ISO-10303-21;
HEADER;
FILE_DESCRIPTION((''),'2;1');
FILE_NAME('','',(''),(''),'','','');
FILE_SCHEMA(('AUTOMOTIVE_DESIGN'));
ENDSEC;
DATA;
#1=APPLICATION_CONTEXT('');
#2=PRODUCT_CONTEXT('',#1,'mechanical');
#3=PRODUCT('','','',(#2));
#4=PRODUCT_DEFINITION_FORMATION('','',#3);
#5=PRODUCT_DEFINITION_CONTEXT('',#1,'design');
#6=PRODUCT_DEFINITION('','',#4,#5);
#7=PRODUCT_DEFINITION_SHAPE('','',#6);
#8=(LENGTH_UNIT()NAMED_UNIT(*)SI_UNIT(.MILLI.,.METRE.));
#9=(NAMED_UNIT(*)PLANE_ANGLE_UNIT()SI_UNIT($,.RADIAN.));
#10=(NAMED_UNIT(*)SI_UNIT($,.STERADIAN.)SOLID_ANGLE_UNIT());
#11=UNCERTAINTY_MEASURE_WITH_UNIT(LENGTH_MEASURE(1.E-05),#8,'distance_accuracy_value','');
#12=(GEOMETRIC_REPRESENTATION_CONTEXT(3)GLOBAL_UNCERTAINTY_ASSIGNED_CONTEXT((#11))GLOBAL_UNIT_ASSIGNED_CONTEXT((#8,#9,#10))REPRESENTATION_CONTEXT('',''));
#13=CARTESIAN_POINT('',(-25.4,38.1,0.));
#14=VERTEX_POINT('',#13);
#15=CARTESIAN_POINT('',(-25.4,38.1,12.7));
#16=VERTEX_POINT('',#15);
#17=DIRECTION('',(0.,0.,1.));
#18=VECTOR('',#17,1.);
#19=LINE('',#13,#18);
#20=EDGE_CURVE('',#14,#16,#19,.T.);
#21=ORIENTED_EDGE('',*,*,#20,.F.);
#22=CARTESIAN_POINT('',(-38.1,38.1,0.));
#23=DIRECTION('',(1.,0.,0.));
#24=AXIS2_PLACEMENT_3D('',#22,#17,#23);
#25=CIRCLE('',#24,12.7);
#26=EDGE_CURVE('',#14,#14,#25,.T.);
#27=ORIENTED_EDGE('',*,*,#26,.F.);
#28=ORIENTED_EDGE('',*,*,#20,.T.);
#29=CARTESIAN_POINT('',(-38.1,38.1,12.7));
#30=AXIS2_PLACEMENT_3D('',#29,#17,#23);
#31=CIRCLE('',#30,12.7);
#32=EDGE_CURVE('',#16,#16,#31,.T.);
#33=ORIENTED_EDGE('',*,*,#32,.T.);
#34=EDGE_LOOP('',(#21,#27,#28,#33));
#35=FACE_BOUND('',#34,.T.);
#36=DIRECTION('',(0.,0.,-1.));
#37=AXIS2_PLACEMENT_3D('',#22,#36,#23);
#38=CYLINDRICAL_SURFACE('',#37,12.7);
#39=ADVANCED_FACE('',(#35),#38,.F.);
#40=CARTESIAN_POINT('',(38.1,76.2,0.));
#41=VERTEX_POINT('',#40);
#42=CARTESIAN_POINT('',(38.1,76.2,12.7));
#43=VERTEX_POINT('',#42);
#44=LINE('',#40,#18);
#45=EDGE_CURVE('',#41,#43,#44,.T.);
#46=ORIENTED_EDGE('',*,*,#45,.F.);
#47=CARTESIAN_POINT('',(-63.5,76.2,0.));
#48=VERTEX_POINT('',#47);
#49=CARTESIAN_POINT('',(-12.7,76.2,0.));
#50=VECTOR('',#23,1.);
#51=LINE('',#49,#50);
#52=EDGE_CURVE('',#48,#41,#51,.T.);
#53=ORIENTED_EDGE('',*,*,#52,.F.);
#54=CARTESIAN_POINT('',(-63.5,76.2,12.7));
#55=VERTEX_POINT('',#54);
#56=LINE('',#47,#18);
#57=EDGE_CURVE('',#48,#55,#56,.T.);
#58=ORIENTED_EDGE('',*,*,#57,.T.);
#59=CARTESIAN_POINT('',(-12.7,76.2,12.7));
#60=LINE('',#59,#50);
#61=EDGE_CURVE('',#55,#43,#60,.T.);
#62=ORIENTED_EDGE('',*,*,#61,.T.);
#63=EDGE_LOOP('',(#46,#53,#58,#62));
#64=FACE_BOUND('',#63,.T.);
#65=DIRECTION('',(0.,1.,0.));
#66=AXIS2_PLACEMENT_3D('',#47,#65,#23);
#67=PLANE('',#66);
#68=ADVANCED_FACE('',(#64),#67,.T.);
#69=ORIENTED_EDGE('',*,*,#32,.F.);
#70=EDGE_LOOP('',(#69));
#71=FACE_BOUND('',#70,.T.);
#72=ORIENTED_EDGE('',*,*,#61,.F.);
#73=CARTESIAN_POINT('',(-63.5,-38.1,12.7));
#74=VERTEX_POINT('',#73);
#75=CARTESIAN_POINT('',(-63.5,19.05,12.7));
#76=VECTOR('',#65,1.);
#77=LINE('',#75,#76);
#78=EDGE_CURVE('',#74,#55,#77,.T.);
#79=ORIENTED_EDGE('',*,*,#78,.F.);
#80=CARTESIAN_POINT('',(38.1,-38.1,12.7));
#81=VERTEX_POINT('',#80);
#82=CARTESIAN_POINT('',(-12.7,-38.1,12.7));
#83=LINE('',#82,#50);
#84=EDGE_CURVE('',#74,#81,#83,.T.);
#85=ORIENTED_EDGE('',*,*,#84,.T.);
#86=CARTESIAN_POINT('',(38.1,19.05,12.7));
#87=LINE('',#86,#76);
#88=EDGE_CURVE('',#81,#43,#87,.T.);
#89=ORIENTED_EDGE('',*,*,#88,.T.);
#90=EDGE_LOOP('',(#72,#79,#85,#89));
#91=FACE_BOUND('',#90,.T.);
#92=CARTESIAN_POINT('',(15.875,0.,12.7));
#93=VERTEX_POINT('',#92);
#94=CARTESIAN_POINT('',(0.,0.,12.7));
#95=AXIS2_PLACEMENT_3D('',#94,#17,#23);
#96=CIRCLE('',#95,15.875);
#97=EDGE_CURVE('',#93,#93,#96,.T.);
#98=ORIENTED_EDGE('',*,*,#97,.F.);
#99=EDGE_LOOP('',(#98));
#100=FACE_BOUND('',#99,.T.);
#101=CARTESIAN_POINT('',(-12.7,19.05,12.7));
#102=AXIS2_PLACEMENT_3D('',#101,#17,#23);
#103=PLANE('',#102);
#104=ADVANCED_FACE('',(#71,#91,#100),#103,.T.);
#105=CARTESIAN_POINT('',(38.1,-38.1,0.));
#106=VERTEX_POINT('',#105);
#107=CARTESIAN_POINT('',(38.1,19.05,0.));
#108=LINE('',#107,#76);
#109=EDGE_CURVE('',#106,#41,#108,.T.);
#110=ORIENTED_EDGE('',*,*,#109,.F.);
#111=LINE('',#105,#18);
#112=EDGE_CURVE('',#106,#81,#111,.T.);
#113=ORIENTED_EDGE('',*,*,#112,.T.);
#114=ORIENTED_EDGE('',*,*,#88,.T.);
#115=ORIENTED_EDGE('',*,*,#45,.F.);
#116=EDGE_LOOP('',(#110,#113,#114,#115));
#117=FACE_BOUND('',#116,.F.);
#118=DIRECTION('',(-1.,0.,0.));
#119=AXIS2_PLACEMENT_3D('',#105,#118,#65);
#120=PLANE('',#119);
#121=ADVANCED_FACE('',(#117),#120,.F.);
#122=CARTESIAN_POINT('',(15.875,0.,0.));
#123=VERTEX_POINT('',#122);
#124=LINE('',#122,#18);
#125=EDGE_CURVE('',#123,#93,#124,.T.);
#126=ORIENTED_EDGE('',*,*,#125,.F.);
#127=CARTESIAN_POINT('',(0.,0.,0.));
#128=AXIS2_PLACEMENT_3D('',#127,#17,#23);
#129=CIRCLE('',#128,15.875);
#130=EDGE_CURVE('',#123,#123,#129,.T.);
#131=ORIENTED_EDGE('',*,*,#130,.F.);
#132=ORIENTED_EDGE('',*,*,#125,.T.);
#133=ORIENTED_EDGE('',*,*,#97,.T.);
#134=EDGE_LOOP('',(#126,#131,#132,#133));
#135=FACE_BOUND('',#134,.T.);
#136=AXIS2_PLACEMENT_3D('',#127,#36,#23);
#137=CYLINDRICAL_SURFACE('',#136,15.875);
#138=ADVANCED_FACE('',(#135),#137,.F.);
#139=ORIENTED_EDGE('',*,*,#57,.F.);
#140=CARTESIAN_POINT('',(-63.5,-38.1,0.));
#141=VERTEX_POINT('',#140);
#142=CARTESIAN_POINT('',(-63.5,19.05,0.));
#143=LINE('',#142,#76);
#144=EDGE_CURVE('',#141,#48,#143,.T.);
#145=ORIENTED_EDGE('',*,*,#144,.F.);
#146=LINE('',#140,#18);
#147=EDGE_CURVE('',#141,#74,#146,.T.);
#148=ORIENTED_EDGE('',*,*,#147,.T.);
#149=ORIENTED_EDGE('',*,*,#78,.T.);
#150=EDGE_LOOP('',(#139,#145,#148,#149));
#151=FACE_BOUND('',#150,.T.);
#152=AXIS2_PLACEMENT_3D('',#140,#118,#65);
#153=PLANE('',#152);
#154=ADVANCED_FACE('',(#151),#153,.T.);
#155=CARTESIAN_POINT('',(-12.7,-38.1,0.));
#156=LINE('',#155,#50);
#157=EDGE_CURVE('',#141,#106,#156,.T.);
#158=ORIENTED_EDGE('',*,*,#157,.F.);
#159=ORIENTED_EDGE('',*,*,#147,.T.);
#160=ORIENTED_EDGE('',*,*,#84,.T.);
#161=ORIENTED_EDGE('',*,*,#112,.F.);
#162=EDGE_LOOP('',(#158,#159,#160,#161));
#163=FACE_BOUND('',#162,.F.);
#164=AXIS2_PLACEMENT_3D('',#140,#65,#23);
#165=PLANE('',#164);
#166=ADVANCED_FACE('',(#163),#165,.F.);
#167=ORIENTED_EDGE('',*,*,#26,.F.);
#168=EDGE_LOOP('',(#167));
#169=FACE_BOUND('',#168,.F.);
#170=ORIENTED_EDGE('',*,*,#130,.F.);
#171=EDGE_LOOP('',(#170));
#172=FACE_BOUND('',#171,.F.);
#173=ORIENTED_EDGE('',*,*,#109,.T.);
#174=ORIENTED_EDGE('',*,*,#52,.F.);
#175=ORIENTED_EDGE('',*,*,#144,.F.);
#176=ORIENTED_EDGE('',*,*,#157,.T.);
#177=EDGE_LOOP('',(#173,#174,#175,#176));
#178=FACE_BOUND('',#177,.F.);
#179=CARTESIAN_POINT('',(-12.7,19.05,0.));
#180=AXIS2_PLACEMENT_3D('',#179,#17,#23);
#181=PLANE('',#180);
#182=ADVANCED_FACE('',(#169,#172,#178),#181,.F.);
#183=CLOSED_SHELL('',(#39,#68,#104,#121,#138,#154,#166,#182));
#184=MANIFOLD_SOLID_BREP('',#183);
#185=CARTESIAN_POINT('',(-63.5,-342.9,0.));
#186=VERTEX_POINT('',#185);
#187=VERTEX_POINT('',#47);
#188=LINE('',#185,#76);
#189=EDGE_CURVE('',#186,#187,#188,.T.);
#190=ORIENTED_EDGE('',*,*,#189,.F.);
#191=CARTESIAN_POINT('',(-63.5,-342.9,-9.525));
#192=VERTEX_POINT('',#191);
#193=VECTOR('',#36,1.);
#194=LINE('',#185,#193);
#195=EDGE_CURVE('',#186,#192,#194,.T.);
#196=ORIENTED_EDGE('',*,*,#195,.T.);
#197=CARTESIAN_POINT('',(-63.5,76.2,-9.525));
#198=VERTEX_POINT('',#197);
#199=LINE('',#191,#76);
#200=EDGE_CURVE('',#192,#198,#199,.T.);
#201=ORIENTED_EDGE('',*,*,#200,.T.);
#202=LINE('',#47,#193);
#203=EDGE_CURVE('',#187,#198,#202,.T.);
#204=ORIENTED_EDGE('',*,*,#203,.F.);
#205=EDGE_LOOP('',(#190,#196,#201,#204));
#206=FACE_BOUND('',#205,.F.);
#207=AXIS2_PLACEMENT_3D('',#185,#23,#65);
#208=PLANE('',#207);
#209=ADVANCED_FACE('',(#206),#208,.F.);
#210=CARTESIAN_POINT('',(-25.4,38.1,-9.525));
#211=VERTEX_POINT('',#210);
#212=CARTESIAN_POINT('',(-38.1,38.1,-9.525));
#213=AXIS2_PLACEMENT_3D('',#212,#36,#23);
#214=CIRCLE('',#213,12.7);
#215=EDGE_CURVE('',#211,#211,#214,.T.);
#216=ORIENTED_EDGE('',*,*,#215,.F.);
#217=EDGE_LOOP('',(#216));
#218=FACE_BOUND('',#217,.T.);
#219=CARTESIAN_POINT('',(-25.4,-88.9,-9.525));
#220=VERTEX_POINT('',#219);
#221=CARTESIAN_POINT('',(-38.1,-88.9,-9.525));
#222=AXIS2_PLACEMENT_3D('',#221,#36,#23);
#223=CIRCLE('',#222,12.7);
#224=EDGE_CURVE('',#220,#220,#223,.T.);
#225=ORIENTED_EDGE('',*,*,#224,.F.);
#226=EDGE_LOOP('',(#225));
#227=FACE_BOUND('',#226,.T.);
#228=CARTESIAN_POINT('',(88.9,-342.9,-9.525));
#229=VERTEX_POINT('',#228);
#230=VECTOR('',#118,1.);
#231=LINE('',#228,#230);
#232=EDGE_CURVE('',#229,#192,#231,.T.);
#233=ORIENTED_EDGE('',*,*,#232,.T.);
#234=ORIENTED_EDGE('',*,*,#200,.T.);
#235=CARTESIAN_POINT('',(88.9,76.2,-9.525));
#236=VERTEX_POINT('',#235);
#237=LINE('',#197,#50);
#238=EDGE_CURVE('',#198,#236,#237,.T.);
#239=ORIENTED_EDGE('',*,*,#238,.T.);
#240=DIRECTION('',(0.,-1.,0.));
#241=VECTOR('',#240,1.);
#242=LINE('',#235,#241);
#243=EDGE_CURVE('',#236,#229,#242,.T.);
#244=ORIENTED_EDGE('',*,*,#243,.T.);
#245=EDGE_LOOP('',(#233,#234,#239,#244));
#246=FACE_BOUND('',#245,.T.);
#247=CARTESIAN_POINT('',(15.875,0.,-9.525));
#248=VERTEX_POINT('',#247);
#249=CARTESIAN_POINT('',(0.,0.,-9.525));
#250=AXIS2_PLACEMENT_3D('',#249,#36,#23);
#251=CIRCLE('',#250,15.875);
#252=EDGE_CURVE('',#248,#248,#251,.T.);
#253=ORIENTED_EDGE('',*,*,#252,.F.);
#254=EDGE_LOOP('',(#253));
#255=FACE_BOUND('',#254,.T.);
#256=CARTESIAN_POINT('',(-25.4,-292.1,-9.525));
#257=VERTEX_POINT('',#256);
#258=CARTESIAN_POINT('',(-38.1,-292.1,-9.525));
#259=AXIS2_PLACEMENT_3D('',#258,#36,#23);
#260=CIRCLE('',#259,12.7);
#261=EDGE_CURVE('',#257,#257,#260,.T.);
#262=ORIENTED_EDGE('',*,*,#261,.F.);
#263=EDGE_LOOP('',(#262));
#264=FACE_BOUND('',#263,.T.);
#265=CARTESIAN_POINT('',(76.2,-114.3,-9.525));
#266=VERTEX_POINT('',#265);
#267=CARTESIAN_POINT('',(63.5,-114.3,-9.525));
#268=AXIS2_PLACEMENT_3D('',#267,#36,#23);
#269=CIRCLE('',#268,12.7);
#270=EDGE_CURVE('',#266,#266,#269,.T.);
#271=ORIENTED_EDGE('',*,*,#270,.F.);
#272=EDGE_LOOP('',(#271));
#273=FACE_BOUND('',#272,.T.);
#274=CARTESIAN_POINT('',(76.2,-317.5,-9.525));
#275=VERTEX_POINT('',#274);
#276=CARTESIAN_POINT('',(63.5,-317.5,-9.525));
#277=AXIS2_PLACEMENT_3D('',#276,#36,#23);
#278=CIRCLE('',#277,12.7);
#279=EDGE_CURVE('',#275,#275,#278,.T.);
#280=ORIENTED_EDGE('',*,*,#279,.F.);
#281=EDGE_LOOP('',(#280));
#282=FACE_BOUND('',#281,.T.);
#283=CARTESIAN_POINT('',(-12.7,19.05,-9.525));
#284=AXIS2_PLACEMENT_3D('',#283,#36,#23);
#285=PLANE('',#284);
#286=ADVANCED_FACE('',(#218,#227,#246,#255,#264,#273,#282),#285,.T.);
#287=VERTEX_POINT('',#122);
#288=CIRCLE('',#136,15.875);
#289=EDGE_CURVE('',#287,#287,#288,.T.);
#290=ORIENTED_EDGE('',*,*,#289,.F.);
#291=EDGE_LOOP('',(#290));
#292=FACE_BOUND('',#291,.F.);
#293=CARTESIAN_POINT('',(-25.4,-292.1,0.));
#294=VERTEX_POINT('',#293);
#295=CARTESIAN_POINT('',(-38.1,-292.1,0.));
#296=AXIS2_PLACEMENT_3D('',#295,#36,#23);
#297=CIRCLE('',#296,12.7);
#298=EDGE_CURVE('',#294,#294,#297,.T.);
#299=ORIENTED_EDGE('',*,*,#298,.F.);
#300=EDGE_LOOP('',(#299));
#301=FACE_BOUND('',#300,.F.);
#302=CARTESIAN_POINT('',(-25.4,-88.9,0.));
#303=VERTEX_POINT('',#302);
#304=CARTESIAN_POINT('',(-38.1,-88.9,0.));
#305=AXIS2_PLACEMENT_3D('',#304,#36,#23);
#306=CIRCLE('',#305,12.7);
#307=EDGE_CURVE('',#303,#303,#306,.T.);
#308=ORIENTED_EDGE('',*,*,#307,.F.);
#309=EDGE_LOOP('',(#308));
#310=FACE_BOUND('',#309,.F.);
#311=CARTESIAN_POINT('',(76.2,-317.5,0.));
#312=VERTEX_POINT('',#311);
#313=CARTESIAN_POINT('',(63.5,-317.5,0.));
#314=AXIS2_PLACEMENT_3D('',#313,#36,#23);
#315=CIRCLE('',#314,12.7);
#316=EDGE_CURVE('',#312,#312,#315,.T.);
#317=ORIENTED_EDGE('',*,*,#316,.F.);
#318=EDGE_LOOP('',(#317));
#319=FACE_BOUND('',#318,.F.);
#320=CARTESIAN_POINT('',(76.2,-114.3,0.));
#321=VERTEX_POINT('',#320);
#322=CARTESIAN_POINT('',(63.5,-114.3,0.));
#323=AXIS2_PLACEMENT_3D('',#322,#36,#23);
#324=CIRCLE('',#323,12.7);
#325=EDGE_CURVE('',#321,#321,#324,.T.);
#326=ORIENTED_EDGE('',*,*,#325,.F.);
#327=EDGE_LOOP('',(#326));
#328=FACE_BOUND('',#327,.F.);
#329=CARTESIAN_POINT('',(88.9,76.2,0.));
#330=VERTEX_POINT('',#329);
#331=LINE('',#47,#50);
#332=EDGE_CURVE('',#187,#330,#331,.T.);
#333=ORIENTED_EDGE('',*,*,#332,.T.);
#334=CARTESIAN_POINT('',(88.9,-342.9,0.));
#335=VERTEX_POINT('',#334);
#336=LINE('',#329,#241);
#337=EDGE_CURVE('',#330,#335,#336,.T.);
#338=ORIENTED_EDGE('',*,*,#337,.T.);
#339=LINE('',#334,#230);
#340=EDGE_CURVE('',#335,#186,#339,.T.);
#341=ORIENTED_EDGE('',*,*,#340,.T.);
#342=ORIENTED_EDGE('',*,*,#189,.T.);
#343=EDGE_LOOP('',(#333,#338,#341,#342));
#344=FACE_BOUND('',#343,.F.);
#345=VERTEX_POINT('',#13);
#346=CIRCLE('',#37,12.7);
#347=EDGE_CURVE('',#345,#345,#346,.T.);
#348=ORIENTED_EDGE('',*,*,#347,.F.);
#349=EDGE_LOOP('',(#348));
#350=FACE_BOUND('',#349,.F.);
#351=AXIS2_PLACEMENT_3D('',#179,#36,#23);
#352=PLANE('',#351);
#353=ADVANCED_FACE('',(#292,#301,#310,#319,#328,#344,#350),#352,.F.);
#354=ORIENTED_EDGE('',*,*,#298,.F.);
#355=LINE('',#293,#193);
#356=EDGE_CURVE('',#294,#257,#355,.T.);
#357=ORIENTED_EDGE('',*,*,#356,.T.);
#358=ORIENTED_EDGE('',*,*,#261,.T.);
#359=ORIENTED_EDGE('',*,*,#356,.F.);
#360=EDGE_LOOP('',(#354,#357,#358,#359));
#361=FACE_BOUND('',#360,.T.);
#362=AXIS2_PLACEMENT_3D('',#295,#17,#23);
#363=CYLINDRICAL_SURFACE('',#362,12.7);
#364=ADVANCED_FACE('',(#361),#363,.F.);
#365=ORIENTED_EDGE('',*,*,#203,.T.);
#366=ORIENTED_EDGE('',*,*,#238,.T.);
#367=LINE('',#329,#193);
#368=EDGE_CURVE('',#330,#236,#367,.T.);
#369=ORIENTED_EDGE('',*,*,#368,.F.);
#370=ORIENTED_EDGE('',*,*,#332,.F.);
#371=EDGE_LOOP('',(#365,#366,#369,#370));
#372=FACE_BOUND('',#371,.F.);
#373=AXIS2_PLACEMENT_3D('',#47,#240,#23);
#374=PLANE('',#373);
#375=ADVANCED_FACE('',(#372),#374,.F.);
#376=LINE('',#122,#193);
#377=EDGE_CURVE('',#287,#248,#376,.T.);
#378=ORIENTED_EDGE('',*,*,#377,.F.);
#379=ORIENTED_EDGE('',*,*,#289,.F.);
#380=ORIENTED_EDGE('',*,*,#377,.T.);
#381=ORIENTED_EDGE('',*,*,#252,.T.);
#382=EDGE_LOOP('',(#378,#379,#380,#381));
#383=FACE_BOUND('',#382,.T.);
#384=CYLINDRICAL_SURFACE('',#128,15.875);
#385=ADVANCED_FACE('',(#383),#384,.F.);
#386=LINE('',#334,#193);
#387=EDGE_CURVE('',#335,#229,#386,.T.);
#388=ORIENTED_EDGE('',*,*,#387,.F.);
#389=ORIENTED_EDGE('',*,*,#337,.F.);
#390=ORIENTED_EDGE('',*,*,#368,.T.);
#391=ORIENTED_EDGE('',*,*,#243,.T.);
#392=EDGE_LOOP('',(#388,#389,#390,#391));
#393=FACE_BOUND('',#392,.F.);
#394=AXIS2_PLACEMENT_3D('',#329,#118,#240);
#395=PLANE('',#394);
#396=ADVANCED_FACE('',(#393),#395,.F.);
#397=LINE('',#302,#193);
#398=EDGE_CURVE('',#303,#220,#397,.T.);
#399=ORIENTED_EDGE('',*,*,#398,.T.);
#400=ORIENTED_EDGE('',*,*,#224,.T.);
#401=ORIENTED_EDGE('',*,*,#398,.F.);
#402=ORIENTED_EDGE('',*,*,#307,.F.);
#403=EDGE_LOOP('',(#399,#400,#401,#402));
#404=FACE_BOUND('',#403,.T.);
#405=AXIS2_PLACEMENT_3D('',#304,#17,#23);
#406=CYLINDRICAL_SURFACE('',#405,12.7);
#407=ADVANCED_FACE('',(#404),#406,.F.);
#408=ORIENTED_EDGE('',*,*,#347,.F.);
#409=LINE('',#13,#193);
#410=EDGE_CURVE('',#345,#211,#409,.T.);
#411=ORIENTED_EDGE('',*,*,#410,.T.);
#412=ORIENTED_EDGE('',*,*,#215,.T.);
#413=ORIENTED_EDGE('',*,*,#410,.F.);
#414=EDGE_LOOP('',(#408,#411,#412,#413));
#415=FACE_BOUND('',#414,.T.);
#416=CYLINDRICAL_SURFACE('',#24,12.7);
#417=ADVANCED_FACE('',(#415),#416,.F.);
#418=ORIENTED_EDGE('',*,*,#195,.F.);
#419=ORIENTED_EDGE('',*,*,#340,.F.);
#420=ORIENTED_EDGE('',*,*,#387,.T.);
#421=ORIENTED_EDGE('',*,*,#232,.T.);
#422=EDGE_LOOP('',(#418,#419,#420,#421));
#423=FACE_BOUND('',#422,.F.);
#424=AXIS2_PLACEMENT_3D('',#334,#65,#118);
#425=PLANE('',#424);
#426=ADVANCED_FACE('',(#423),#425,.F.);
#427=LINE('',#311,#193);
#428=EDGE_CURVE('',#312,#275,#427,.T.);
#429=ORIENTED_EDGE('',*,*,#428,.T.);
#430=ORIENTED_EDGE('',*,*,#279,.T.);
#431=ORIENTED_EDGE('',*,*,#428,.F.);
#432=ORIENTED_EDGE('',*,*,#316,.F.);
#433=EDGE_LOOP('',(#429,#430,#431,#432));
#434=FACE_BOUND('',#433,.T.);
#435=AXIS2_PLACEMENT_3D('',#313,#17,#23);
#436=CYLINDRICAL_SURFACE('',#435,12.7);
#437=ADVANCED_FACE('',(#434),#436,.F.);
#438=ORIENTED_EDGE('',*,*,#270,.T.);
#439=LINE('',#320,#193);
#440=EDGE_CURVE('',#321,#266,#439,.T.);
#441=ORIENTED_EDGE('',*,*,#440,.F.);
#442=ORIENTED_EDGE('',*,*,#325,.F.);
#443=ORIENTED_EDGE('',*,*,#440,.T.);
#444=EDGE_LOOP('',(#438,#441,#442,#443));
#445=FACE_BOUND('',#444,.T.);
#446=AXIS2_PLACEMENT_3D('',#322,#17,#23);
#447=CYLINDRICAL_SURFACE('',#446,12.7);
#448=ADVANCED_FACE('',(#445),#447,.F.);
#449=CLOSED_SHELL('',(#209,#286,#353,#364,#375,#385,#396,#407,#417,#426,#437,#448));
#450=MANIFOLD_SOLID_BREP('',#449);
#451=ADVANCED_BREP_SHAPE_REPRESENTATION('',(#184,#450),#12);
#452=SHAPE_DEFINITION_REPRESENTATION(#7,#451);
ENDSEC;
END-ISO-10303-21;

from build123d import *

# Parameters (mm, degrees)
F0_W     = 101.6
F0_H     = 114.3
F0_R     = 15.875
F0_R_2   = 12.7
F1_DEPTH = 12.7
F2_W     = 101.6
F2_H     = 114.3
F2_R     = 12.7
F2_R_2   = 15.875
F3_DEPTH = 9.525


with BuildPart() as f1:
    # F0 (on Top) → F1 (new body)
    with BuildSketch(Plane.XY):
        with Locations((-12.7, 19.05)):
            Rectangle(F0_W, F0_H)
        Circle(F0_R, mode=Mode.SUBTRACT)
        with Locations((-38.1, 38.1)):
            Circle(F0_R_2, mode=Mode.SUBTRACT)
    extrude(amount=F1_DEPTH)


with BuildPart() as f3:
    # F2 (on face) → F3 (new body)
    with BuildSketch(Plane(origin=(0, 0, 0), x_dir=(1, 0, 0), z_dir=(0, 0, -1))):
        with Locations((-12.7, -19.05)):
            Rectangle(F2_W, F2_H)
        with Locations((-38.1, -38.1)):
            Circle(F2_R, mode=Mode.SUBTRACT)
        Circle(F2_R_2, mode=Mode.SUBTRACT)
        Polygon((38.1, 38.1), (38.1, -76.2), (88.9, -76.2), (88.9, 342.9), (-63.5, 342.9), (-63.5, 38.1), align=None)
        with Locations((-38.1, 88.9)):
            Circle(F2_R, mode=Mode.SUBTRACT)
        with Locations((63.5, 114.3)):
            Circle(F2_R, mode=Mode.SUBTRACT)
        with Locations((-38.1, 292.1)):
            Circle(F2_R, mode=Mode.SUBTRACT)
        with Locations((63.5, 317.5)):
            Circle(F2_R, mode=Mode.SUBTRACT)
    extrude(amount=F3_DEPTH)


solid = Compound([f1.part, f3.part])
